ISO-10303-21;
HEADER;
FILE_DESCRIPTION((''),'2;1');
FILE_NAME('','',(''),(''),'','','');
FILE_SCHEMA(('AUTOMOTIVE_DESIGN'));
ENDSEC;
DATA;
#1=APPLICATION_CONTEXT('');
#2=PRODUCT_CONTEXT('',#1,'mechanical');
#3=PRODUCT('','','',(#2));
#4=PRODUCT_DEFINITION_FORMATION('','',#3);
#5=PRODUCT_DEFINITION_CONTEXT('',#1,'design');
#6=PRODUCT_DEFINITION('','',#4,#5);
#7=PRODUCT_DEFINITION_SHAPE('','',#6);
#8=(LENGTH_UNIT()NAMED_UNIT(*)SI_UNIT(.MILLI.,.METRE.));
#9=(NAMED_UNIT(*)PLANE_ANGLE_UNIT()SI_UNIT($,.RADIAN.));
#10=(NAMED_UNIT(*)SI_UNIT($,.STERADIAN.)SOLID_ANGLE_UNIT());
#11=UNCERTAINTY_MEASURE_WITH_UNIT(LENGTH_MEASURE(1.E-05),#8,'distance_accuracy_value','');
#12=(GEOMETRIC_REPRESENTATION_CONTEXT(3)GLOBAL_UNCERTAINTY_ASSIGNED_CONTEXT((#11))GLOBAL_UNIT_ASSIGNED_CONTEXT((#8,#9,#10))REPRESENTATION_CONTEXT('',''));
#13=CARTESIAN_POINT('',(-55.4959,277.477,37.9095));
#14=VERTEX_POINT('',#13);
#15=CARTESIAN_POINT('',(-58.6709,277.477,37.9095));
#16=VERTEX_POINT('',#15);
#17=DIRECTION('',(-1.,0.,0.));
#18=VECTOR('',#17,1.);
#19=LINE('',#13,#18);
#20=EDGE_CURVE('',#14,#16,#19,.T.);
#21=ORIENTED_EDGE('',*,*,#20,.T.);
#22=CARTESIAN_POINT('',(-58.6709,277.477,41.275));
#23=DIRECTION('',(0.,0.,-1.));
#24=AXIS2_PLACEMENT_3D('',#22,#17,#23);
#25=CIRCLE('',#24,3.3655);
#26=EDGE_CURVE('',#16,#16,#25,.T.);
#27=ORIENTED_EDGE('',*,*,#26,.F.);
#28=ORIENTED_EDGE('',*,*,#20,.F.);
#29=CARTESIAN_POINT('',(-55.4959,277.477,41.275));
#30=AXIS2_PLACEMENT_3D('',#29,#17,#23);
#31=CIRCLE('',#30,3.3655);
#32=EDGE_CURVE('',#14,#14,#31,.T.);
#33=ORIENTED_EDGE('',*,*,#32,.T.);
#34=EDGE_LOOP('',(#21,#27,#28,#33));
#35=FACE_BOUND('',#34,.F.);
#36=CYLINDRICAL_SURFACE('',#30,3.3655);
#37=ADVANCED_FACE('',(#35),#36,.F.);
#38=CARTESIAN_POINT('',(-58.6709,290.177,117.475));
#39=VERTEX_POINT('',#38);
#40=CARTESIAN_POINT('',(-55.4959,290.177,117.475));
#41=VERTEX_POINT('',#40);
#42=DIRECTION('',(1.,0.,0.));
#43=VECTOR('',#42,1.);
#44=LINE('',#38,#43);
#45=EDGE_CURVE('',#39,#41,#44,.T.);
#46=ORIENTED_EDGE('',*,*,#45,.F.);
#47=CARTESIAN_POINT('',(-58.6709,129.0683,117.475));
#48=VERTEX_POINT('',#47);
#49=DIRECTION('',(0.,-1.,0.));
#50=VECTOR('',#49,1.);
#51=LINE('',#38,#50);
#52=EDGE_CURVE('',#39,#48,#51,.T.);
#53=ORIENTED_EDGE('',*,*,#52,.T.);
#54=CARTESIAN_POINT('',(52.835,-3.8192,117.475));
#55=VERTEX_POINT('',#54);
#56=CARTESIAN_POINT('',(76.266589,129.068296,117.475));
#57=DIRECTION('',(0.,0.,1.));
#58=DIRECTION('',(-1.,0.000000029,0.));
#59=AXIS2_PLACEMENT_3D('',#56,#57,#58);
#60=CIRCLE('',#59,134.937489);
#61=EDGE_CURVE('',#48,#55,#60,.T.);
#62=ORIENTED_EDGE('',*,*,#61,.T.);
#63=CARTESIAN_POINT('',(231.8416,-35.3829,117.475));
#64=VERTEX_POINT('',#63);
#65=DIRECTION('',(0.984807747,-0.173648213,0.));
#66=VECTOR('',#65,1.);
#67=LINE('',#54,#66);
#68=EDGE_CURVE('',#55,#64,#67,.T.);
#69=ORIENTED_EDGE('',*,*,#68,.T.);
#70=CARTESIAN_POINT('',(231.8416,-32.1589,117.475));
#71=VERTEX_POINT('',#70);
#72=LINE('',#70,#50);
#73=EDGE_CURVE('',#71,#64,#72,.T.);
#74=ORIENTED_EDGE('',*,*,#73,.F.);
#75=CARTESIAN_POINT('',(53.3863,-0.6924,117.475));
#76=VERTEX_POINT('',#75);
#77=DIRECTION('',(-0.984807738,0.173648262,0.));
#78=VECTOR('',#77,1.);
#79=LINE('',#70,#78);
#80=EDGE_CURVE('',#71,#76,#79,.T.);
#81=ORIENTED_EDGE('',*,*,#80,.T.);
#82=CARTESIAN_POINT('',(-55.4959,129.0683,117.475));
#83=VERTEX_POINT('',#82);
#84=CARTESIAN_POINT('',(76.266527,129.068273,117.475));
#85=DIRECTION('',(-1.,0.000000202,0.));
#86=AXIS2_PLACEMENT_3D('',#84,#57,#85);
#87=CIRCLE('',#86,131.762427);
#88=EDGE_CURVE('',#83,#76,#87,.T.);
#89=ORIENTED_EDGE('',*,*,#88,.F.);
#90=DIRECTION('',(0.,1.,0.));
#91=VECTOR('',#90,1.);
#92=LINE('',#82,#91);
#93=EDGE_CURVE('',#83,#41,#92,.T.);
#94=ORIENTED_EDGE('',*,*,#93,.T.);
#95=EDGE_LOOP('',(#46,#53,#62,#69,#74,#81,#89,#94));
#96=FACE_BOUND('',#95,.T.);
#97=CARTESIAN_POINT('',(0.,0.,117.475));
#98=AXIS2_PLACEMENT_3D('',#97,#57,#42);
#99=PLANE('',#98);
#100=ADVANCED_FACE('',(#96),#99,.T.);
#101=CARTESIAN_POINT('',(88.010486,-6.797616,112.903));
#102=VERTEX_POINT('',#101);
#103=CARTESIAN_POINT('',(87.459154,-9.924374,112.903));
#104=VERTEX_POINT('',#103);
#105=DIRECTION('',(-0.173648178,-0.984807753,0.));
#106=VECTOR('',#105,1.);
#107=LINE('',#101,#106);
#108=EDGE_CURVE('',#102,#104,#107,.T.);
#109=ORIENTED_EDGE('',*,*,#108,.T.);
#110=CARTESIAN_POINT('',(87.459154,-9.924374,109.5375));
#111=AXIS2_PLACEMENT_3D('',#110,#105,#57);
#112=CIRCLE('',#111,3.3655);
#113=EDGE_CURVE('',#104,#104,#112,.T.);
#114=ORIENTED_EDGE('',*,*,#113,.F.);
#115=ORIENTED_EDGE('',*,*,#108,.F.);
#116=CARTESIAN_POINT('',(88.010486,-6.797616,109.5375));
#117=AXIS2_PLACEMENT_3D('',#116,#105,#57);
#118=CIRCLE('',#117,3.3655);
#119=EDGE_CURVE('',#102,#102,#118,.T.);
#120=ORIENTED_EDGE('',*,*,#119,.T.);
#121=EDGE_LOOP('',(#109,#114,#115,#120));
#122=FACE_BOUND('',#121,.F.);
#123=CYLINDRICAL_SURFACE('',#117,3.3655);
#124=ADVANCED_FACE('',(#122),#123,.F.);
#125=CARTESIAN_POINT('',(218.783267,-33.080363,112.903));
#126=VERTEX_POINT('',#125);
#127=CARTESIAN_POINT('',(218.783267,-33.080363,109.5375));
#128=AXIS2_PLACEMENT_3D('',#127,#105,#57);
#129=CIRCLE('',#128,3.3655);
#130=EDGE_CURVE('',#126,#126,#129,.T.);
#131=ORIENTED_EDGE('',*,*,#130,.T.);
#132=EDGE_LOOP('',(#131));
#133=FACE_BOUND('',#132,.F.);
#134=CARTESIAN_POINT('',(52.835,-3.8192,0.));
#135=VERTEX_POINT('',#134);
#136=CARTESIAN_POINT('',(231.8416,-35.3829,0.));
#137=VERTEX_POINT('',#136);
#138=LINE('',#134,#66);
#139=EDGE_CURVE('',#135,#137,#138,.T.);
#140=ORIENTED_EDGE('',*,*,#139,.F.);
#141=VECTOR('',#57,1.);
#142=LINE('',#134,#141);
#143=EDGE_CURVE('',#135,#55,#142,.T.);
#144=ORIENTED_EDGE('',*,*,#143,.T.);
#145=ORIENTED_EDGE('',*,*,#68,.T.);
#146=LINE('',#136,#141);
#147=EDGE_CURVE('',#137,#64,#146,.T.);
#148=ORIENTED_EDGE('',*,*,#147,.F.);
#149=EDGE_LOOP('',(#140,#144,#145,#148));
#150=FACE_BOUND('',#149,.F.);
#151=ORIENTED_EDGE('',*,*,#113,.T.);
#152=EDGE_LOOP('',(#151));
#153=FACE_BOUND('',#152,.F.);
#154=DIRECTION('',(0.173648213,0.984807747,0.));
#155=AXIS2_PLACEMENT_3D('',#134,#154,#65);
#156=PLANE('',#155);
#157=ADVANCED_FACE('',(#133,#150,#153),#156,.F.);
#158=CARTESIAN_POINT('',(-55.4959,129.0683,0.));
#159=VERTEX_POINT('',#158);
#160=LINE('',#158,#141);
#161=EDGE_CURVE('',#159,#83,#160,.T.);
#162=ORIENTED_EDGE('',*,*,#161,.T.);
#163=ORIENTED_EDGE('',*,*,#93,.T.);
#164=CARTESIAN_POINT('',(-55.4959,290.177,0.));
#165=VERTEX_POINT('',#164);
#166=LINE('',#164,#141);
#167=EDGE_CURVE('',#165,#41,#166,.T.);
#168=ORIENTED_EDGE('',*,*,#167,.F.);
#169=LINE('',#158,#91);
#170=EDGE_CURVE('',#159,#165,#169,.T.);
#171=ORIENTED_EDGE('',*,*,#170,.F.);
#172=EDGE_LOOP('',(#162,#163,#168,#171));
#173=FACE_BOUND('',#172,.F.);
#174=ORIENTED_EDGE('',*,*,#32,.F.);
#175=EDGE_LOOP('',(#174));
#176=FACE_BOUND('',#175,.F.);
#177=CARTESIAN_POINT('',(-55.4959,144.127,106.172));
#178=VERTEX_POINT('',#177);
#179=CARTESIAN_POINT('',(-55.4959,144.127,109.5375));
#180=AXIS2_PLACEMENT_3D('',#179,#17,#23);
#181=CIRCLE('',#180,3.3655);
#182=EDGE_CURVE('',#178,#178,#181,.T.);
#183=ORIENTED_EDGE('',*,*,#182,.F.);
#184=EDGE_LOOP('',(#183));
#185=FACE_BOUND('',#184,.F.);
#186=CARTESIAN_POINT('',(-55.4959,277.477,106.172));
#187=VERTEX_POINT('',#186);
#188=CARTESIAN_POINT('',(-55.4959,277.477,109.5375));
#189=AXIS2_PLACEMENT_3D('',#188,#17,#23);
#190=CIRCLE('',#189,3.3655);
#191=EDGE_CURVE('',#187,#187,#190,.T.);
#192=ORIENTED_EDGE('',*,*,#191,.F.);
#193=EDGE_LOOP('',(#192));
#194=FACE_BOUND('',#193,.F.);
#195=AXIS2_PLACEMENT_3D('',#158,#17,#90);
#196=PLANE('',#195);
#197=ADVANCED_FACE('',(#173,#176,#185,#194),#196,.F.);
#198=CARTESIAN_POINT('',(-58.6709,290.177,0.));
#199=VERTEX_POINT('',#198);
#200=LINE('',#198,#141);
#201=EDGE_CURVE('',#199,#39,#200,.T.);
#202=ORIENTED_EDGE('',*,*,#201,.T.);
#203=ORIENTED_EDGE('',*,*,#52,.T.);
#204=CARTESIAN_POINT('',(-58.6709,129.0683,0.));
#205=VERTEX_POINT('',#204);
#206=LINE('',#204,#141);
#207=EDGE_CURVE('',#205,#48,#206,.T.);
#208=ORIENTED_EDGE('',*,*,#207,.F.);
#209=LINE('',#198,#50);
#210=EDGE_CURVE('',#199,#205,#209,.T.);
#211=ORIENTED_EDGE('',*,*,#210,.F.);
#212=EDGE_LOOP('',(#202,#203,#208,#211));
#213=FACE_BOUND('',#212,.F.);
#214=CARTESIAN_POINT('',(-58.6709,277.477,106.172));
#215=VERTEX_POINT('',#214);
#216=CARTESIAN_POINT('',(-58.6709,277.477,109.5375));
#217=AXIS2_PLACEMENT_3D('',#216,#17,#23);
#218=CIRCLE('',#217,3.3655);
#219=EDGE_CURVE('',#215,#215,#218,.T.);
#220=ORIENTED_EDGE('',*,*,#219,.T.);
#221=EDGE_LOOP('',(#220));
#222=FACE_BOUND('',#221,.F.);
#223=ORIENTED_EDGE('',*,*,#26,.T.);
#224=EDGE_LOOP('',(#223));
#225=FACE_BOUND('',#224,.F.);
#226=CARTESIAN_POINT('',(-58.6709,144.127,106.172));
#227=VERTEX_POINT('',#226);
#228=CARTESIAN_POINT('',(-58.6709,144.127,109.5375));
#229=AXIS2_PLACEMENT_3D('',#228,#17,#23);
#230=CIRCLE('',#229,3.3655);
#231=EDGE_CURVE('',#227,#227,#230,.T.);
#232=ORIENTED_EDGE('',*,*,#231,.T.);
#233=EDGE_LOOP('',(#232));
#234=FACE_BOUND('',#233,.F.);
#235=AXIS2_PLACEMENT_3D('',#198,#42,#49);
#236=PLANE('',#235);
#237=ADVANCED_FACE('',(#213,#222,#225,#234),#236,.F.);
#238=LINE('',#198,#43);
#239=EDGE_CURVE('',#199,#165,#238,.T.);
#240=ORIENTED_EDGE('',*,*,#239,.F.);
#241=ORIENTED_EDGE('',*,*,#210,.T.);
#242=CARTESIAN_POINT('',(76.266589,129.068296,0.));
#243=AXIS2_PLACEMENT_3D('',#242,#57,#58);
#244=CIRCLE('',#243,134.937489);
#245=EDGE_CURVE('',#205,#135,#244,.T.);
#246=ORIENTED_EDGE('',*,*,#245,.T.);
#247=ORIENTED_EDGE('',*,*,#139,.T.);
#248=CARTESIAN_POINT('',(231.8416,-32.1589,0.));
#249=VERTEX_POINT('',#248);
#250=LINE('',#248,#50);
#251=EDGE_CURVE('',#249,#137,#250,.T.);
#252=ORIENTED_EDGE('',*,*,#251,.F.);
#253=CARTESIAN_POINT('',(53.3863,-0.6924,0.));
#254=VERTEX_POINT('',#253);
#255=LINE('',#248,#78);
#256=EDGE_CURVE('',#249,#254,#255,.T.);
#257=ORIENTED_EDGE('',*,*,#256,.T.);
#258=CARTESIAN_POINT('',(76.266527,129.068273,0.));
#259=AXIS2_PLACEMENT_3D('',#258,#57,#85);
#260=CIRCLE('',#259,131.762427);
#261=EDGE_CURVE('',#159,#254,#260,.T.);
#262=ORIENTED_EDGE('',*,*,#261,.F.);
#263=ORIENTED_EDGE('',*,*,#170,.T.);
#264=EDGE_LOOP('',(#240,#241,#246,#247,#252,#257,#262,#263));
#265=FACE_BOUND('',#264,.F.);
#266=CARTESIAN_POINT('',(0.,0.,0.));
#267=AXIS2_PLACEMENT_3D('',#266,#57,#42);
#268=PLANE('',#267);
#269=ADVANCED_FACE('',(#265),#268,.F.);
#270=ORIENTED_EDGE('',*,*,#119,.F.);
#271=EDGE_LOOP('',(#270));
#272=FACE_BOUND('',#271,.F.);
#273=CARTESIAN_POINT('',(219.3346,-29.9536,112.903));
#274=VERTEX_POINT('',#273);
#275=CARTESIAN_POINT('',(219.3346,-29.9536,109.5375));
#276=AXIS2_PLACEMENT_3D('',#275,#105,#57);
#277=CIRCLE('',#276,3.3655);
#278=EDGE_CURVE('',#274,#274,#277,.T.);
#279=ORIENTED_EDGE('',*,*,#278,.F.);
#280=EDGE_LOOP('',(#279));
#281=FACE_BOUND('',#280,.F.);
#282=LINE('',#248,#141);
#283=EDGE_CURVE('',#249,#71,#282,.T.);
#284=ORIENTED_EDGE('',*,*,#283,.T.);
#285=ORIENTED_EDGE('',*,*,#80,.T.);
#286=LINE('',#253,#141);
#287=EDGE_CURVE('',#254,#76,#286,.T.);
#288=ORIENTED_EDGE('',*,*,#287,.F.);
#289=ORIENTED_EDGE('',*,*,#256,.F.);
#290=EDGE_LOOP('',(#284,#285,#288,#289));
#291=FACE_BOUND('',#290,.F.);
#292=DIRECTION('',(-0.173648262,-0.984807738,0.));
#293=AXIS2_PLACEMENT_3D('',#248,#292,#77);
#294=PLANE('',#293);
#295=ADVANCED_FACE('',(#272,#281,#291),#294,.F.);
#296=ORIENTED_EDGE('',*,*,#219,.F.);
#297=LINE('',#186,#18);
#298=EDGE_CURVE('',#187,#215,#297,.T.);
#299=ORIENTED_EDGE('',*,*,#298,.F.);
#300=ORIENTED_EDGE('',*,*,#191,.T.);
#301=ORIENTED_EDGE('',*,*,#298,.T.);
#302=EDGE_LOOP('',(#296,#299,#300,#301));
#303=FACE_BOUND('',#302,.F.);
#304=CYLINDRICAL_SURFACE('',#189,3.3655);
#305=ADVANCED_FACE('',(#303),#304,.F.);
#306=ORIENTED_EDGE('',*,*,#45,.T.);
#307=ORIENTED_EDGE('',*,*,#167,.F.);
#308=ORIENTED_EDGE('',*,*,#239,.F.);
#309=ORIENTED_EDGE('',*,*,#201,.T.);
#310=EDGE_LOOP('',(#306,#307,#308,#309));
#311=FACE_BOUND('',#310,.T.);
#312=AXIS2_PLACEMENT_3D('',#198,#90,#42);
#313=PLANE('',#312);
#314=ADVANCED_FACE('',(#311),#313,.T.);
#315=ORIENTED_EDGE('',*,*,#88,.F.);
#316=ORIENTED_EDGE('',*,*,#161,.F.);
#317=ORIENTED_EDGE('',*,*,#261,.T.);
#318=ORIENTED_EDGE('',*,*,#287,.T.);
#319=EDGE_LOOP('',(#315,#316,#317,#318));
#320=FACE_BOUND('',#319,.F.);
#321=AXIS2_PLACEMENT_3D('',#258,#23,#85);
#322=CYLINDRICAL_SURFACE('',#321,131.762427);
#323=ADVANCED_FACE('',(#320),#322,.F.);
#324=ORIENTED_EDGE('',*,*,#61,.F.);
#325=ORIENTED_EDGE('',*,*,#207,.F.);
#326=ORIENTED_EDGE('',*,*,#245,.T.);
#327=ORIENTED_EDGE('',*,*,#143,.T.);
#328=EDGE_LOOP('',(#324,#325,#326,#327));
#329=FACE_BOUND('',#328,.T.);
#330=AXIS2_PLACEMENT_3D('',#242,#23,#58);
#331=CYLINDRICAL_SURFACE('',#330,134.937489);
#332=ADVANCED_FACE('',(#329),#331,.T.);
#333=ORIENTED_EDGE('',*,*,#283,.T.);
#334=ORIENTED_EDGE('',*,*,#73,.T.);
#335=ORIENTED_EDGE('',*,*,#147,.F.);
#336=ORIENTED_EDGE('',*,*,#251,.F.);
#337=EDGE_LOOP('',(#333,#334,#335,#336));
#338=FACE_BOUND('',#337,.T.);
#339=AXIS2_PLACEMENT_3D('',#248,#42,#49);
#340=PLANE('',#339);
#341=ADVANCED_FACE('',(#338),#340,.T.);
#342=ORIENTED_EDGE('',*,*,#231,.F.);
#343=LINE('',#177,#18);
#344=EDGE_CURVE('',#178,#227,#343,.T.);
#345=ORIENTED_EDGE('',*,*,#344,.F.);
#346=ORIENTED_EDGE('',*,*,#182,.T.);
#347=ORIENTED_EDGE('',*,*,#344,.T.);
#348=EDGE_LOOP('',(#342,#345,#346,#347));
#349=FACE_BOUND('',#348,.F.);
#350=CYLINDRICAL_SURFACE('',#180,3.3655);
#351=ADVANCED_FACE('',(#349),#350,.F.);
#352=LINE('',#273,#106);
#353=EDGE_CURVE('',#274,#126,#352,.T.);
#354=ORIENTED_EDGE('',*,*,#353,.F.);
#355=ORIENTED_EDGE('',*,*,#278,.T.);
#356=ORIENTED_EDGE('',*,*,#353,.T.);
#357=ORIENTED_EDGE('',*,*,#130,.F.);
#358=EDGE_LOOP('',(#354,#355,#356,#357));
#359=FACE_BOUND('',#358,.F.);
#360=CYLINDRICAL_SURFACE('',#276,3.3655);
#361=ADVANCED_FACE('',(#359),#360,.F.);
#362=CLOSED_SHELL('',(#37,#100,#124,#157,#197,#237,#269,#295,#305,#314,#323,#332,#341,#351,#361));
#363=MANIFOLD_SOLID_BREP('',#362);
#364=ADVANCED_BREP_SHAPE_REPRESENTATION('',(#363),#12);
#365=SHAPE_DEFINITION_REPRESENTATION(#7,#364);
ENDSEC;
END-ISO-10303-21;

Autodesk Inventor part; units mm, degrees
ref_plane "YZ Plane" through (0, 0, 0) normal (1, 0, 0) x (0, 1, 0)
ref_plane "XZ Plane" through (0, 0, 0) normal (0, 1, 0) x (-1, 0, 0)
ref_plane "XY Plane" through (0, 0, 0) normal (0, 0, 1) x (1, 0, 0)
sketch "Sketch1" plane through (0, 0, 0) normal (0, 0, 1) x (1, 0, 0)
  line L0 (-58.6709, 290.177) -> (-55.4959, 290.177) projected
  line L1 (-58.6709, 290.177) -> (-58.6709, 129.0683) projected
  arc A0 (-58.6709, 129.0683) -> (52.835, -3.8192) centre (76.2666, 129.0683) ccw projected
  line L2 (52.835, -3.8192) -> (231.8416, -35.3829) projected
  line L3 (231.8416, -32.1589) -> (231.8416, -35.3829) projected
  line L4 (231.8416, -32.1589) -> (53.3863, -0.6924) projected
  arc A1 (-55.4959, 129.0683) -> (53.3863, -0.6924) centre (76.2666, 129.0683) ccw projected
  line L5 (-55.4959, 129.0683) -> (-55.4959, 290.177) projected
  point P0 (0, 0)
extrude "Extrusion1" add sketch "Sketch1" along normal blind 117.475
hole "Hole1" at (-55.4959, 277.477, 109.5375) direction (-1, 0, 0) diameter 6.731 depth 25.4 tip angle 118
pattern_linear "Rectangular Pattern1" count 2 spacing 133.35 along (0, -1, 0) of "Hole1"
pattern_linear "Rectangular Pattern2" count 2 spacing 68.2625 along (0, 0, -1) of "Hole1"
hole "Hole2" at (219.3346, -29.9536, 109.5375) direction (-0.1736482, -0.9848078, 0) diameter 6.731 depth 25.4 tip angle 118
pattern_linear "Rectangular Pattern4" count 2 spacing 133.35 along (-0.9848078, 0.1736482, 0) of "Hole2"
properties part number "GE-12070-03"
